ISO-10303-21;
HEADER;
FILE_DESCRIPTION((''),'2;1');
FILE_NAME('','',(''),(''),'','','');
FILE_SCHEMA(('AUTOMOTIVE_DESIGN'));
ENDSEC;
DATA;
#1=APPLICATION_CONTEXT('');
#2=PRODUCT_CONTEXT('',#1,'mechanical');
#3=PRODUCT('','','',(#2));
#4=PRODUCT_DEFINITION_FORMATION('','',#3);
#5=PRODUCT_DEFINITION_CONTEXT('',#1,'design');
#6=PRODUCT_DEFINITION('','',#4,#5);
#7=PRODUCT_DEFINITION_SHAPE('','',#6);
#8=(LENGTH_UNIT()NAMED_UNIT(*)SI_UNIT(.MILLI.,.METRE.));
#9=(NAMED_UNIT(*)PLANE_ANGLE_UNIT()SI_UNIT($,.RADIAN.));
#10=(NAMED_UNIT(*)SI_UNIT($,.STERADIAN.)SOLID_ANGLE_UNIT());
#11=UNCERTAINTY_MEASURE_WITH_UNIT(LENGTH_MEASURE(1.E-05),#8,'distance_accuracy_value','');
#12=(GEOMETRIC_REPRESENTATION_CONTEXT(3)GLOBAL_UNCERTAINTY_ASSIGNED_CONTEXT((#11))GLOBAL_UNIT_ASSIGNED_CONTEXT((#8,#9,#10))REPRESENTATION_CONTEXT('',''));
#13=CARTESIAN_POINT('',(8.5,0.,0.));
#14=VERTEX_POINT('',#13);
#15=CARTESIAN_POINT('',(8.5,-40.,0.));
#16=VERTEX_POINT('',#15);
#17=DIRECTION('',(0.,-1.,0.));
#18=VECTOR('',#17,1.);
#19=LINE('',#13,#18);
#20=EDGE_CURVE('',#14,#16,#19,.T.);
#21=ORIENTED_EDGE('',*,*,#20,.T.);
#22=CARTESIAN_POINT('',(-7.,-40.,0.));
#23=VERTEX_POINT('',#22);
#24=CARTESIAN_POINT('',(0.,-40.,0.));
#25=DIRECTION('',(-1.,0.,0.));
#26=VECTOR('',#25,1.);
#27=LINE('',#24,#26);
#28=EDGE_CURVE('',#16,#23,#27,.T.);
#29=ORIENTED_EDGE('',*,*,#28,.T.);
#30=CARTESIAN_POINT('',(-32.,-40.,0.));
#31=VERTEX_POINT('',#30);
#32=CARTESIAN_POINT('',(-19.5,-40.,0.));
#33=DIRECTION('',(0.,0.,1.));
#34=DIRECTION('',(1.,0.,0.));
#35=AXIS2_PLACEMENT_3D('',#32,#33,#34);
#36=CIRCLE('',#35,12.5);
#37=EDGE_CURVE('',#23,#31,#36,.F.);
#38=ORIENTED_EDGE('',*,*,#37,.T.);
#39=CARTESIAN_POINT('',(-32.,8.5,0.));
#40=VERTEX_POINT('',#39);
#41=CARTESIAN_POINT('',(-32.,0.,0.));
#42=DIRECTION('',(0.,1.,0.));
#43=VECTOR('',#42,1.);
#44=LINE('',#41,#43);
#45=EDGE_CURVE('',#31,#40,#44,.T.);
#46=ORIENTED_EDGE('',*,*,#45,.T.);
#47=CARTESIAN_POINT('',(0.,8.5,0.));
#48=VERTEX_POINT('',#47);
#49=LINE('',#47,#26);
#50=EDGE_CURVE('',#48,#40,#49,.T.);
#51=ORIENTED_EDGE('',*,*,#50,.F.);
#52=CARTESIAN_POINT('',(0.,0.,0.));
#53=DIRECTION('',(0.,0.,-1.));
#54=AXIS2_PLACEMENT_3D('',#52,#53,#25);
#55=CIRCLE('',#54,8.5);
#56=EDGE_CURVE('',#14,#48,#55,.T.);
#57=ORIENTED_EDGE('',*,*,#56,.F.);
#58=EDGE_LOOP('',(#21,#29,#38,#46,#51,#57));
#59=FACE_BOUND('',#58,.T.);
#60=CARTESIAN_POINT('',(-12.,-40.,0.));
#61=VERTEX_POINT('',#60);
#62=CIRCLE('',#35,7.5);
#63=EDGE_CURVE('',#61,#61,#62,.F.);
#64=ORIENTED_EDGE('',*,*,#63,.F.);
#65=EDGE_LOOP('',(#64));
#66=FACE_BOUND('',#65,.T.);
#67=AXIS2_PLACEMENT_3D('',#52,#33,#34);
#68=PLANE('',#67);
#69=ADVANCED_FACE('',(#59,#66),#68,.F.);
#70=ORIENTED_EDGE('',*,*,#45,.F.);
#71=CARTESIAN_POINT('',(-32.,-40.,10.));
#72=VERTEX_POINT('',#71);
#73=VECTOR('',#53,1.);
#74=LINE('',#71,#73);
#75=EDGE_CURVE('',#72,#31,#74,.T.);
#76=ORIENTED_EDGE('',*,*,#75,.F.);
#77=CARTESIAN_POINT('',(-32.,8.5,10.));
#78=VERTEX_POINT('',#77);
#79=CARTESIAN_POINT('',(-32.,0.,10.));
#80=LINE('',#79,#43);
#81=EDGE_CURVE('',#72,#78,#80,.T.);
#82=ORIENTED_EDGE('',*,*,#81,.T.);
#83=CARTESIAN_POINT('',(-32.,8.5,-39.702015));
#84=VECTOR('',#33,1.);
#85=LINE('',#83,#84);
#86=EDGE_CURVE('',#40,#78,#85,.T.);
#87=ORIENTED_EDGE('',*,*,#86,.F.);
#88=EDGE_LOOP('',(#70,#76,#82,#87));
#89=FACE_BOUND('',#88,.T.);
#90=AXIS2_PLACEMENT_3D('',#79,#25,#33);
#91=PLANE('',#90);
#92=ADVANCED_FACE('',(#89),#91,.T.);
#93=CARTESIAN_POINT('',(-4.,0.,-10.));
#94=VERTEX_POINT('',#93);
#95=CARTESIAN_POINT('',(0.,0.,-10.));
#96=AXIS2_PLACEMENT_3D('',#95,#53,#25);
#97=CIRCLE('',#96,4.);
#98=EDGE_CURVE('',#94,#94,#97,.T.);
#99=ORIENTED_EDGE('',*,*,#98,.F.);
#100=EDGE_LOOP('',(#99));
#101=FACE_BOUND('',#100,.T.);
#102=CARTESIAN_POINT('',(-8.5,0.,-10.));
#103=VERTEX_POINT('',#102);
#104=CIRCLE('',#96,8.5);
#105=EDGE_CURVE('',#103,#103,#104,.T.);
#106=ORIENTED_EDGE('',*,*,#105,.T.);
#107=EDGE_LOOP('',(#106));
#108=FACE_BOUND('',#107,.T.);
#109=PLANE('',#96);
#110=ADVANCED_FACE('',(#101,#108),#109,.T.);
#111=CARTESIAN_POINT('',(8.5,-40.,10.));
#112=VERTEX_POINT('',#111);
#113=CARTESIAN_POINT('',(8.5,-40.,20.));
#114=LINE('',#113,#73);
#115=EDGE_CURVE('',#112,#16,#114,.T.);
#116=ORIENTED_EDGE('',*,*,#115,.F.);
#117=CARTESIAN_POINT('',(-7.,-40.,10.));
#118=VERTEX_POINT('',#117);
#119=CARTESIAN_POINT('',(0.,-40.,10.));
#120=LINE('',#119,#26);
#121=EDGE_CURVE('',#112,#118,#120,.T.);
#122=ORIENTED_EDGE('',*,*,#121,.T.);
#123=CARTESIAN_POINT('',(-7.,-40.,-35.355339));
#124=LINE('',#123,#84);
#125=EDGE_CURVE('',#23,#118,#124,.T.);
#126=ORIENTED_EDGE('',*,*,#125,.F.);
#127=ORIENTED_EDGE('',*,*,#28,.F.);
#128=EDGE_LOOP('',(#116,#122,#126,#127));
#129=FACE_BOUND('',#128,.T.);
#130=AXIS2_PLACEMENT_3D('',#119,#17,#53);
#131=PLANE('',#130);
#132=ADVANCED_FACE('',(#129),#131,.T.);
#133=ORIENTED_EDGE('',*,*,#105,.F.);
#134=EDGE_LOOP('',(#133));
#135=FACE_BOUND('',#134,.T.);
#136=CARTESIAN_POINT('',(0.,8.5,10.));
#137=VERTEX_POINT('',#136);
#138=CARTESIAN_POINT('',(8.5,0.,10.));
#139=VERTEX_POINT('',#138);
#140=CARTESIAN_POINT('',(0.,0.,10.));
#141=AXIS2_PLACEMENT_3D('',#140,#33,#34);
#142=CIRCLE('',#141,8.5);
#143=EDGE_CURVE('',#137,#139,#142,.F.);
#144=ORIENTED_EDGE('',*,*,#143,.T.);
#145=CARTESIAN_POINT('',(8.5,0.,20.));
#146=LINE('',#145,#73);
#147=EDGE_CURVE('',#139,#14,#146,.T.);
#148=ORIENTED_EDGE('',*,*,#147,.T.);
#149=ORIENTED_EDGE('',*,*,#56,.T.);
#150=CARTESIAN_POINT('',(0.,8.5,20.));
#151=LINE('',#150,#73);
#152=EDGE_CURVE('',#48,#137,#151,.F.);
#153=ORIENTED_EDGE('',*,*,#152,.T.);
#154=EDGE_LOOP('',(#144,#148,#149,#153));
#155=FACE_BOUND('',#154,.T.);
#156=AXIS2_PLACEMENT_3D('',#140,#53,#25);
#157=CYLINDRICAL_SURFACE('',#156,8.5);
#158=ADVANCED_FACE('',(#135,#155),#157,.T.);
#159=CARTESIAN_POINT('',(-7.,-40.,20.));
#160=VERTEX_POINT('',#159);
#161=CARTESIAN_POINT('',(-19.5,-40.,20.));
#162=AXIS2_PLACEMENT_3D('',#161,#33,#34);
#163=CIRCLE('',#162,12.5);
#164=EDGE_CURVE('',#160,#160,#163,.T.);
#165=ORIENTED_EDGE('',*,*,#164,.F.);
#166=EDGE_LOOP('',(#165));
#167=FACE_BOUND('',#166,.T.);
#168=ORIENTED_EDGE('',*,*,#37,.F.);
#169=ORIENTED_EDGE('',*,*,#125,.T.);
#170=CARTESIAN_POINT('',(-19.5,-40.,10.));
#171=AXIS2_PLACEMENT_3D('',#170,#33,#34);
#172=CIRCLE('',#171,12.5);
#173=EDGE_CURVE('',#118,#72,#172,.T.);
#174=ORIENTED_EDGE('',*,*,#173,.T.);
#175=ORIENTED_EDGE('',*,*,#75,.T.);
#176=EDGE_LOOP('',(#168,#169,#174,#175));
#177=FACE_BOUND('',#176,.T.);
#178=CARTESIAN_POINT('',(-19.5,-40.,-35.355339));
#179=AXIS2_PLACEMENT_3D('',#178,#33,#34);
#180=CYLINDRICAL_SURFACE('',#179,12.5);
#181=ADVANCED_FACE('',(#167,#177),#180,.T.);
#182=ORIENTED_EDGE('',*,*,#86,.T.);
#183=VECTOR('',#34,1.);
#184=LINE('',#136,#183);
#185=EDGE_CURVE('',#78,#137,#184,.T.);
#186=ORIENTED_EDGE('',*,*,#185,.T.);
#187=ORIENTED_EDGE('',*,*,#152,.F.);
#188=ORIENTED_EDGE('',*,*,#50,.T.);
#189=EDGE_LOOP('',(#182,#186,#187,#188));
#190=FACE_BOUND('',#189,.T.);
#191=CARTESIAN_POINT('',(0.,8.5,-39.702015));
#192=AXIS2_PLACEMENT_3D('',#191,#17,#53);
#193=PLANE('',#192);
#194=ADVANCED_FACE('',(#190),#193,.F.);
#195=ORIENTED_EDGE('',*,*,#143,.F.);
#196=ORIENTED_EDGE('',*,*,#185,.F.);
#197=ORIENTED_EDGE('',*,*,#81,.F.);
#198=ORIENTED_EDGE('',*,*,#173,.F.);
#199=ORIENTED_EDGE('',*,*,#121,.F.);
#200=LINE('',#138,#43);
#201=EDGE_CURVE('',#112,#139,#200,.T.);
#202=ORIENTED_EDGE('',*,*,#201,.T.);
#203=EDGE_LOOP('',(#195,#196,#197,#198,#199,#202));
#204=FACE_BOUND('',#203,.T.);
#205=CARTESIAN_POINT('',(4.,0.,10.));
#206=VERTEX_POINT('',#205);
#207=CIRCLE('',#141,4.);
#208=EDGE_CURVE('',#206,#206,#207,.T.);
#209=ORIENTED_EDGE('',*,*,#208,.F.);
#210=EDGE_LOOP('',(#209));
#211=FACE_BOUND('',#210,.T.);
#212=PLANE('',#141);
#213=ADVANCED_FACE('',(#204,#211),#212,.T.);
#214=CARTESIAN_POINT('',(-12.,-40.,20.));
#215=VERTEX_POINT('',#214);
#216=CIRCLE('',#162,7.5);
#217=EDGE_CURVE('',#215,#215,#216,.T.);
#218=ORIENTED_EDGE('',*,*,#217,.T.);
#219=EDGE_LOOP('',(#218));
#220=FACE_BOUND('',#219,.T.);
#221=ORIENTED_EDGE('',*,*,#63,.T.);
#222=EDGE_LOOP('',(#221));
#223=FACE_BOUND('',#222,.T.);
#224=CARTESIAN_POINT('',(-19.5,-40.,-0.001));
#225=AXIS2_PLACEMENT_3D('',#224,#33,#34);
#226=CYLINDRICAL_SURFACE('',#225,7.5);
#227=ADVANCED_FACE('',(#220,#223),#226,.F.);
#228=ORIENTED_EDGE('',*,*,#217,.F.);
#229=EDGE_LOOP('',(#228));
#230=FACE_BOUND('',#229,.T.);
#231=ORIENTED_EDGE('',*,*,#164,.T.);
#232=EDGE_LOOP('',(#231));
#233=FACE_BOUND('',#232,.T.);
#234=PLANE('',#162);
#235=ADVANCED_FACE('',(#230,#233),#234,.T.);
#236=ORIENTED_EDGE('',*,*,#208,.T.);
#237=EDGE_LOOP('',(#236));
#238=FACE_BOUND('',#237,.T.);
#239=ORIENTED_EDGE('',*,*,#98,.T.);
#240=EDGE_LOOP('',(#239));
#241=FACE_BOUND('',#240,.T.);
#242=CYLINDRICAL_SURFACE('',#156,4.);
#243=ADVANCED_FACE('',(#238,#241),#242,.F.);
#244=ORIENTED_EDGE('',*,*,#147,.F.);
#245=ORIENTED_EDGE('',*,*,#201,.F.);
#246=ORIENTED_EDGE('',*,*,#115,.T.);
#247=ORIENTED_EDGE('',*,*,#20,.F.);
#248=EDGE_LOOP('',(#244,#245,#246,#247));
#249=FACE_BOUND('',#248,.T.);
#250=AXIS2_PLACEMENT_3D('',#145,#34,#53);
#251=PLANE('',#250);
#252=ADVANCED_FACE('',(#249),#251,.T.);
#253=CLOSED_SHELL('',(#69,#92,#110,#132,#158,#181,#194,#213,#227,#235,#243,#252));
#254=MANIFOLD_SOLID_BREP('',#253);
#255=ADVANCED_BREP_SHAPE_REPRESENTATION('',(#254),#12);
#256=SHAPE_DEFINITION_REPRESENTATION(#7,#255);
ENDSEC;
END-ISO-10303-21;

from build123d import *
from build123d.topology import SkipClean

# Parameters (mm, degrees)
SKETCH_1_R          = 4
EXTRUDE_1_DEPTH     = 10
CUT_EXTRUDE_1_DEPTH = 63.713634881
SKETCH_3_R          = 12.5
EXTRUDE_2_DEPTH     = 10
CUT_EXTRUDE_2_REACH = 64.292
SKETCH_4_R          = 7.5
EXTRUDE_START       = 10
SKETCH_5_R          = 12.5
SKETCH_5_R_2        = 7.5
EXTRUDE_3_DEPTH     = 10
SKETCH_6_R          = 8.5
SKETCH_6_R_2        = 4
EXTRUDE_4_DEPTH     = 10
EXTRUDE_START_2     = -10
EXTRUDE_5_DEPTH     = 10
CUT_EXTRUDE_3_DEPTH = 65.654852873


with BuildPart() as part:
    # Эскиз1 → Бобышка-Вытянуть1 (new body)
    with BuildSketch(Plane.XY):
        with BuildLine():
            Line((13, -15), (8.188495856, 2.280029742))
            ThreePointArc((8.188495856, 2.280029742), (2.584908604, 8.097422276), (-5.352868863, 6.602786907))
            Line((-5.352868863, 6.602786907), (-32, -15))
            Line((-32, -15), (-32, -40))
            Line((-32, -40), (-13, -40))
            ThreePointArc((-13, -40), (0, -53), (13, -40))
            Line((13, -40), (13, -15))
        make_face()
        Circle(SKETCH_1_R, mode=Mode.SUBTRACT)
    extrude(amount=EXTRUDE_1_DEPTH)

    # Эскиз2 → Вырез-Вытянуть1 (cut, through all)
    with BuildSketch(Plane.XY.offset(10)):
        with BuildLine():
            Line((-13, -40), (13, -40))
            ThreePointArc((13, -40), (0, -53), (-13, -40))
        make_face()
    extrude(amount=-CUT_EXTRUDE_1_DEPTH, mode=Mode.SUBTRACT)

    # Эскиз3 → Бобышка-Вытянуть2 (add)
    with BuildSketch(Plane.XY.offset(10)):
        with Locations((-19.5, -40)):
            Circle(SKETCH_3_R)
    extrude(amount=-EXTRUDE_2_DEPTH)

    # Эскиз4 → Вырез-Вытянуть2 (cut, up to next)
    with BuildSketch(Plane.XY.offset(10), mode=Mode.PRIVATE) as cut_extrude_2_sk1:
        with Locations((-19.5, -40)):
            Circle(SKETCH_4_R)
    cut_extrude_2_tool1 = extrude(cut_extrude_2_sk1.sketch, amount=-CUT_EXTRUDE_2_REACH, mode=Mode.PRIVATE) & part.part
    add(cut_extrude_2_tool1.solids().sort_by_distance((-19.5, -40, 10))[0], mode=Mode.SUBTRACT)

    # Эскиз5 → Бобышка-Вытянуть3 (add)
    with BuildSketch(Plane.XY.offset(10).offset(EXTRUDE_START)):
        with Locations((-19.5, -40)):
            Circle(SKETCH_5_R)
        with Locations((-19.5, -40)):
            Circle(SKETCH_5_R_2, mode=Mode.SUBTRACT)
    extrude(amount=-EXTRUDE_3_DEPTH)

    # Эскиз6 → Бобышка-Вытянуть4 (add)
    with SkipClean():  # the faces are left unmerged after this step: merging them gives an invalid solid
        with BuildSketch(Plane(origin=(0, 0, 0), x_dir=(-1, 0, 0), z_dir=(0, 0, -1)).offset(EXTRUDE_START)):
            Circle(SKETCH_6_R)
            Circle(SKETCH_6_R_2, mode=Mode.SUBTRACT)
        extrude(amount=-EXTRUDE_4_DEPTH)

    # Эскиз7 → Бобышка-Вытянуть5 (add)
    with SkipClean():  # the faces are left unmerged after this step: merging them gives an invalid solid
        with BuildSketch(Plane.XY.offset(10).offset(EXTRUDE_START_2)):
            with BuildLine():
                Line((-32, 8.5), (-32, -15))
                Line((-32, -15), (-5.352868863, 6.602786907))
                ThreePointArc((-5.352868863, 6.602786907), (-2.839569604, 8.011669268), (4e-08, 8.5))
                Line((4e-08, 8.5), (-32, 8.5))
            make_face()
            with BuildLine():
                Line((13, 8.5), (4e-08, 8.5))
                ThreePointArc((4e-08, 8.5), (5.14148556, 6.768687187), (8.188495856, 2.280029742))
                Line((8.188495856, 2.280029742), (13, -15))
                Line((13, -15), (13, 8.5))
            make_face()
        extrude(amount=EXTRUDE_5_DEPTH)
    add(part.part.scale(1), mode=Mode.REPLACE)  # the faces are merged on a copy

    # Эскиз8 → Вырез-Вытянуть3 (cut, through all)
    with BuildSketch(Plane(origin=(0, 0, 0), x_dir=(-1, 0, 0), z_dir=(0, 0, -1))):
        with BuildLine():
            Line((-8.5, -40), (-8.5, 0))
            ThreePointArc((-8.5, 0), (-6.01040764, 6.01040764), (0, 8.5))
            Line((0, 8.5), (-13, 8.5))
            Line((-13, 8.5), (-13, -40))
            Line((-13, -40), (-8.5, -40))
        make_face()
    extrude(amount=-CUT_EXTRUDE_3_DEPTH, mode=Mode.SUBTRACT)


solid = part.part
